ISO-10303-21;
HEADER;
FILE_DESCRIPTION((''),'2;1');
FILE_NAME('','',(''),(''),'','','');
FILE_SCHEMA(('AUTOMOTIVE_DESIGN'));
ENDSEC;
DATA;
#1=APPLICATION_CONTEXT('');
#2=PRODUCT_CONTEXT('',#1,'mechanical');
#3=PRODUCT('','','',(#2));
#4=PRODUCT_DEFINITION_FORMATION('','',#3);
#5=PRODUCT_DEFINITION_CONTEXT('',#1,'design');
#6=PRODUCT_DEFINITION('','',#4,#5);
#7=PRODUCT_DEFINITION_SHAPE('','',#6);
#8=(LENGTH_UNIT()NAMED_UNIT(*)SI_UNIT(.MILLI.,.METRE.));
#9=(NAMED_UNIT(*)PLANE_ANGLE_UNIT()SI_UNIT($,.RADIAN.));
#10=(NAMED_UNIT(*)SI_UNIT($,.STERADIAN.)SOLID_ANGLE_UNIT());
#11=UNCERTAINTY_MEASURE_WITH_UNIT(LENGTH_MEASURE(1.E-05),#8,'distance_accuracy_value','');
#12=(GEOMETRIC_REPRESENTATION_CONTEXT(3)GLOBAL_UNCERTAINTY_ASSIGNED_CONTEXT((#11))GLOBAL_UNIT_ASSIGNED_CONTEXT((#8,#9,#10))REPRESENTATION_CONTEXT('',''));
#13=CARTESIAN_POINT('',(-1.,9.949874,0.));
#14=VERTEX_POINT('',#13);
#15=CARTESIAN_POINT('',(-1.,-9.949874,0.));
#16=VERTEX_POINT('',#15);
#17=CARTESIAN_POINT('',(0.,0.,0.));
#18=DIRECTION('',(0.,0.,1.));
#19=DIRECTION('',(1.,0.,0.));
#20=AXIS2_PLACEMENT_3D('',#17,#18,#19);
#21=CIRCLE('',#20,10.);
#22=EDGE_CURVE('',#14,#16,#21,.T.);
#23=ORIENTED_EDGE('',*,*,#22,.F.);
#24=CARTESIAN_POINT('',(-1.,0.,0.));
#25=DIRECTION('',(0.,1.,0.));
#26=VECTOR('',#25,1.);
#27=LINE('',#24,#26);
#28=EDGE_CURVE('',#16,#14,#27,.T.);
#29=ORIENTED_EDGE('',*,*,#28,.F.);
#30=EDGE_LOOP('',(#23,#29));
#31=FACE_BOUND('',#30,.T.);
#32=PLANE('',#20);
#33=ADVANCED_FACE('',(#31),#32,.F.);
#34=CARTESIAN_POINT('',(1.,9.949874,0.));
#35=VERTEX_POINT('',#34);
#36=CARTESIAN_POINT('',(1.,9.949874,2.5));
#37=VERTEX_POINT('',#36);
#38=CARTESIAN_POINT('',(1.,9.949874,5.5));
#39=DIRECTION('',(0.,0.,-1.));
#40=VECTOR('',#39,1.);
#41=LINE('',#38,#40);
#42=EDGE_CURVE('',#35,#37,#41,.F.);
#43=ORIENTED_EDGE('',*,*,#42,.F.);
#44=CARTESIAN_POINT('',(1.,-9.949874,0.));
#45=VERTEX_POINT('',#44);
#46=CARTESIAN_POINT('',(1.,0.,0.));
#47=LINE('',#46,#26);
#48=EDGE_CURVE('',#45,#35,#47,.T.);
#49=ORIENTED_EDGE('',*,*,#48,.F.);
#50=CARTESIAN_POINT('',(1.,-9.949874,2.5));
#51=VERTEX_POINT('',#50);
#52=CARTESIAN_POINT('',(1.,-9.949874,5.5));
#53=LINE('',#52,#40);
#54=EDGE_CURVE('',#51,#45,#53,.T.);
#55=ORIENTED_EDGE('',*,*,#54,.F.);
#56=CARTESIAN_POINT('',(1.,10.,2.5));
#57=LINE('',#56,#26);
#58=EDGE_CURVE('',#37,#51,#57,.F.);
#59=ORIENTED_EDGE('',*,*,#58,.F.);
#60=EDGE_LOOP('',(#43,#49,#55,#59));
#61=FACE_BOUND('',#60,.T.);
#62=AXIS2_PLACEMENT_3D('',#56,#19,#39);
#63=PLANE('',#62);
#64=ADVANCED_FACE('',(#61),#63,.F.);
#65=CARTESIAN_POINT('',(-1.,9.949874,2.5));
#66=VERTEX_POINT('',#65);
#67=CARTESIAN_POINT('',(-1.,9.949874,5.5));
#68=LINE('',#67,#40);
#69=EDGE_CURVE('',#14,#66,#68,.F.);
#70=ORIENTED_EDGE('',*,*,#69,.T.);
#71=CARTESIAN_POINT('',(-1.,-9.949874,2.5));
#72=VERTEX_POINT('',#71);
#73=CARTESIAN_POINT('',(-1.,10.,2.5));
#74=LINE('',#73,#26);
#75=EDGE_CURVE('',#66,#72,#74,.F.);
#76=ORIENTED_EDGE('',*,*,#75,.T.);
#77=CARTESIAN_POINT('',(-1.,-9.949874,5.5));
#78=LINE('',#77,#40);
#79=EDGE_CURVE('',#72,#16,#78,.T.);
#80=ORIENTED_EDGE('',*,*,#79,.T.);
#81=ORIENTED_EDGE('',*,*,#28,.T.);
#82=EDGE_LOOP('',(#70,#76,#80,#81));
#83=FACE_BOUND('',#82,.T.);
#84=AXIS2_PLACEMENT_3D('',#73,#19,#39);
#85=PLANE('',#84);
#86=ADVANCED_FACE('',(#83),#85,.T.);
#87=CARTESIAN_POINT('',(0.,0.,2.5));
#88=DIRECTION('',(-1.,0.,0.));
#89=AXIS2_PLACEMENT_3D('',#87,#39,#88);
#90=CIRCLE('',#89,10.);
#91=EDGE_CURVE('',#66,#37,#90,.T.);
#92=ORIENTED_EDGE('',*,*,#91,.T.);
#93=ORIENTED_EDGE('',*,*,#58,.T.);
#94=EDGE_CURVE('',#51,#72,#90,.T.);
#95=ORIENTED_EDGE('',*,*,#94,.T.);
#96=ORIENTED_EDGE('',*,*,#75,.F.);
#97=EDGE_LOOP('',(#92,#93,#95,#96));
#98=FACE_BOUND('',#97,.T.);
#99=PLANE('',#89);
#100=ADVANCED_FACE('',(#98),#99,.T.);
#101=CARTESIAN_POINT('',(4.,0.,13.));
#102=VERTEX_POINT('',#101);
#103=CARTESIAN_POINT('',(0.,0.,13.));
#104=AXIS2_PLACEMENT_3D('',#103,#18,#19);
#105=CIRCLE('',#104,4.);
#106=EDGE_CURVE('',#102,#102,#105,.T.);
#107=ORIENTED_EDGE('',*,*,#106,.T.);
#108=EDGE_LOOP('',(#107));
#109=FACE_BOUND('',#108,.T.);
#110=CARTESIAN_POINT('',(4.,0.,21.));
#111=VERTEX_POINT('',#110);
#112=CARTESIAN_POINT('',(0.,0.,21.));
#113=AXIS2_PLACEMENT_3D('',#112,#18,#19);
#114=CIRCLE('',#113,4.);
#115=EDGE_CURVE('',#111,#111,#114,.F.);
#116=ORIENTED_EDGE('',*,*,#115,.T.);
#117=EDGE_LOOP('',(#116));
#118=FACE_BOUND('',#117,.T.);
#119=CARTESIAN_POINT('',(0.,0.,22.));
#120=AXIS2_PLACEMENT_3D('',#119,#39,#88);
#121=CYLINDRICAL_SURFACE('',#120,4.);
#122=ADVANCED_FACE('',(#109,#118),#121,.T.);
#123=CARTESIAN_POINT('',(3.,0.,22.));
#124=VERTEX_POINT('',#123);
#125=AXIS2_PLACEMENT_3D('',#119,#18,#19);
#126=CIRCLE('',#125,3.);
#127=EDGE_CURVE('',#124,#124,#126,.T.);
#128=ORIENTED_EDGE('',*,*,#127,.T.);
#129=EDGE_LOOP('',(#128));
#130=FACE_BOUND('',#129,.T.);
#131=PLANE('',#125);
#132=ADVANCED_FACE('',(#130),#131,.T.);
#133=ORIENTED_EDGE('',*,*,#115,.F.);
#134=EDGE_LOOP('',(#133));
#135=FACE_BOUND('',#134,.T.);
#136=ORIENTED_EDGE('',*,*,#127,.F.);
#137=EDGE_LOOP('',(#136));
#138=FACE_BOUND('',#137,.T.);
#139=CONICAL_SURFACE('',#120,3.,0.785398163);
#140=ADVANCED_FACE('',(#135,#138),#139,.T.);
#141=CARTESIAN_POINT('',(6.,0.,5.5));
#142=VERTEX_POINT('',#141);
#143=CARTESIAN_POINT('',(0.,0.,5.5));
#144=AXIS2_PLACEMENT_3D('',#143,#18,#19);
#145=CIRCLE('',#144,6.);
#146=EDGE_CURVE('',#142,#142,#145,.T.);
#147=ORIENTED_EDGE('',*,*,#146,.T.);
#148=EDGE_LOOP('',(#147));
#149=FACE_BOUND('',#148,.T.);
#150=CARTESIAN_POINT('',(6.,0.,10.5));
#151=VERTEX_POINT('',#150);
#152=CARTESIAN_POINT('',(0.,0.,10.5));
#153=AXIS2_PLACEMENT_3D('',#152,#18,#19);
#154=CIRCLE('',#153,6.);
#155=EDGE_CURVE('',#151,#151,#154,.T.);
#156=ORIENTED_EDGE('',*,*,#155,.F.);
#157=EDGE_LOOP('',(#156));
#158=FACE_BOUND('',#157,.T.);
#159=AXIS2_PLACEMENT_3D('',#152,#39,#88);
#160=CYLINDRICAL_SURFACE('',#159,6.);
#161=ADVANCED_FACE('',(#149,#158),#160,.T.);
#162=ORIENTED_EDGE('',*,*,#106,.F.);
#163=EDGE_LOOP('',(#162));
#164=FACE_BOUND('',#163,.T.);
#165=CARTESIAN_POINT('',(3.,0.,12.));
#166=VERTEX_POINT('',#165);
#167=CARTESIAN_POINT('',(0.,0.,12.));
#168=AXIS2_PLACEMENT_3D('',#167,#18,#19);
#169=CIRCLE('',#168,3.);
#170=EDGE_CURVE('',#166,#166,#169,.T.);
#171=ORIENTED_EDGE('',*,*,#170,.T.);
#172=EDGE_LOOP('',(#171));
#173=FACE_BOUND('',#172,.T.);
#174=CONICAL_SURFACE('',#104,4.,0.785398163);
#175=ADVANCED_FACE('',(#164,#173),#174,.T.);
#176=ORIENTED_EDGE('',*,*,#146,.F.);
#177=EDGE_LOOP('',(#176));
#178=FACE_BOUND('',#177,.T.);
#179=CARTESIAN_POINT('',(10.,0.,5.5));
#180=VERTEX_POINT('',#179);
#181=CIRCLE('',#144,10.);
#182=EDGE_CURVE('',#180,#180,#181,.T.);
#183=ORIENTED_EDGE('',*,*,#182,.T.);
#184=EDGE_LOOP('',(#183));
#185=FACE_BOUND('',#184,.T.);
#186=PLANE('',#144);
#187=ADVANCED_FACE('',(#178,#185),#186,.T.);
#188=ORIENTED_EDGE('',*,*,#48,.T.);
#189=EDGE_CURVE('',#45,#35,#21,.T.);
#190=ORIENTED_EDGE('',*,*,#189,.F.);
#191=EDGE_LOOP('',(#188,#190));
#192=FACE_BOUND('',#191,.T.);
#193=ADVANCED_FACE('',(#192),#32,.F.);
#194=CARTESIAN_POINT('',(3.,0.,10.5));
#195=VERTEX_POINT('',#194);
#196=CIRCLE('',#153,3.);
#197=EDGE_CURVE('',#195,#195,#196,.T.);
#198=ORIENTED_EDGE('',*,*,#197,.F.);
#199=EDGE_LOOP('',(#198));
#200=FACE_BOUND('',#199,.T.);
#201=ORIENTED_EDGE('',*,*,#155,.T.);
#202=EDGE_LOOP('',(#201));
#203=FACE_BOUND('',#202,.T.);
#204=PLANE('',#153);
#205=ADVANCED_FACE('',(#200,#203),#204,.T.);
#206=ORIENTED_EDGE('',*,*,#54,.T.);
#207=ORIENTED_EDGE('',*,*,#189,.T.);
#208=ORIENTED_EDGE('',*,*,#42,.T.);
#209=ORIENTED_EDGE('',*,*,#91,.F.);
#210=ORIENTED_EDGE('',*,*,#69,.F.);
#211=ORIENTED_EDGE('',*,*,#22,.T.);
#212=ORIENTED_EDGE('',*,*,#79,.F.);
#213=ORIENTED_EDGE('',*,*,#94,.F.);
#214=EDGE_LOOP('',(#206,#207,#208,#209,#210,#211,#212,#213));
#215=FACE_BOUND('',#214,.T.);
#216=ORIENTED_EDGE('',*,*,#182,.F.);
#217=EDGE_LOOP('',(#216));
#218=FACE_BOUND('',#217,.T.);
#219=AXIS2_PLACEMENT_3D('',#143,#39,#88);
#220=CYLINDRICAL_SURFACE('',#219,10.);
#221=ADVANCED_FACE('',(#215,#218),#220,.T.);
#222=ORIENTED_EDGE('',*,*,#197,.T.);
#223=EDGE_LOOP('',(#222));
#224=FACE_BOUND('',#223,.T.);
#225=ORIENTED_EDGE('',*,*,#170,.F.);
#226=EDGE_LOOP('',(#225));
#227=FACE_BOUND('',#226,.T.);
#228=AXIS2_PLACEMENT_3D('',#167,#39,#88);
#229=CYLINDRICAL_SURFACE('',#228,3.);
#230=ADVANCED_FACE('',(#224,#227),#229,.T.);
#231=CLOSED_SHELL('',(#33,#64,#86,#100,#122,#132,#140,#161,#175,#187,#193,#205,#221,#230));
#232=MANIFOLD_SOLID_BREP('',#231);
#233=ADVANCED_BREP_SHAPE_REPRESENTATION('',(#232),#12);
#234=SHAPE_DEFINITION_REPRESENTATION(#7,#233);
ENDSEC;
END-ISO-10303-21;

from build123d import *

# Parameters (mm, degrees)
SKETCH_1_R          = 10
EXTRUDE_1_DEPTH     = 5.5
SKETCH_2_R          = 6
EXTRUDE_2_DEPTH     = 5
SKETCH_3_R          = 3
EXTRUDE_3_DEPTH     = 1.5
SKETCH_4_R          = 4
EXTRUDE_4_DEPTH     = 10
CHAMFER_1_SIZE      = 1
SKETCH_5_W          = 2
SKETCH_5_H          = 20
CUT_EXTRUDE_1_DEPTH = 2.5


with BuildPart() as part:
    # 草图1 → 凸台-拉伸1 (new body)
    with BuildSketch(Plane.XY):
        Circle(SKETCH_1_R)
    extrude(amount=EXTRUDE_1_DEPTH)

    # 草图2 → 凸台-拉伸2 (add)
    with BuildSketch(Plane.XY.offset(5.5)):
        Circle(SKETCH_2_R)
    extrude(amount=EXTRUDE_2_DEPTH)

    # 草图3 → 凸台-拉伸3 (add)
    with BuildSketch(Plane.XY.offset(10.5)):
        Circle(SKETCH_3_R)
    extrude(amount=EXTRUDE_3_DEPTH)

    # 草图4 → 凸台-拉伸4 (add)
    with BuildSketch(Plane.XY.offset(12)):
        Circle(SKETCH_4_R)
    extrude(amount=EXTRUDE_4_DEPTH)

    # 倒角1
    chamfer_1_edges = [part.edges().sort_by_distance(p)[0] for p in [
        (-4, 0, 12),
        (-4, 0, 22),
    ]]
    chamfer(chamfer_1_edges, length=CHAMFER_1_SIZE - 0.0001)  # a hair under: the kernel refuses the full size

    # 草图5 → 切除-拉伸-薄壁1 (cut)
    with BuildSketch(Plane(origin=(0, 0, 0), x_dir=(-1, 0, 0), z_dir=(0, 0, -1))):
        Rectangle(SKETCH_5_W, SKETCH_5_H)
    extrude(amount=-CUT_EXTRUDE_1_DEPTH, mode=Mode.SUBTRACT)


solid = part.part
